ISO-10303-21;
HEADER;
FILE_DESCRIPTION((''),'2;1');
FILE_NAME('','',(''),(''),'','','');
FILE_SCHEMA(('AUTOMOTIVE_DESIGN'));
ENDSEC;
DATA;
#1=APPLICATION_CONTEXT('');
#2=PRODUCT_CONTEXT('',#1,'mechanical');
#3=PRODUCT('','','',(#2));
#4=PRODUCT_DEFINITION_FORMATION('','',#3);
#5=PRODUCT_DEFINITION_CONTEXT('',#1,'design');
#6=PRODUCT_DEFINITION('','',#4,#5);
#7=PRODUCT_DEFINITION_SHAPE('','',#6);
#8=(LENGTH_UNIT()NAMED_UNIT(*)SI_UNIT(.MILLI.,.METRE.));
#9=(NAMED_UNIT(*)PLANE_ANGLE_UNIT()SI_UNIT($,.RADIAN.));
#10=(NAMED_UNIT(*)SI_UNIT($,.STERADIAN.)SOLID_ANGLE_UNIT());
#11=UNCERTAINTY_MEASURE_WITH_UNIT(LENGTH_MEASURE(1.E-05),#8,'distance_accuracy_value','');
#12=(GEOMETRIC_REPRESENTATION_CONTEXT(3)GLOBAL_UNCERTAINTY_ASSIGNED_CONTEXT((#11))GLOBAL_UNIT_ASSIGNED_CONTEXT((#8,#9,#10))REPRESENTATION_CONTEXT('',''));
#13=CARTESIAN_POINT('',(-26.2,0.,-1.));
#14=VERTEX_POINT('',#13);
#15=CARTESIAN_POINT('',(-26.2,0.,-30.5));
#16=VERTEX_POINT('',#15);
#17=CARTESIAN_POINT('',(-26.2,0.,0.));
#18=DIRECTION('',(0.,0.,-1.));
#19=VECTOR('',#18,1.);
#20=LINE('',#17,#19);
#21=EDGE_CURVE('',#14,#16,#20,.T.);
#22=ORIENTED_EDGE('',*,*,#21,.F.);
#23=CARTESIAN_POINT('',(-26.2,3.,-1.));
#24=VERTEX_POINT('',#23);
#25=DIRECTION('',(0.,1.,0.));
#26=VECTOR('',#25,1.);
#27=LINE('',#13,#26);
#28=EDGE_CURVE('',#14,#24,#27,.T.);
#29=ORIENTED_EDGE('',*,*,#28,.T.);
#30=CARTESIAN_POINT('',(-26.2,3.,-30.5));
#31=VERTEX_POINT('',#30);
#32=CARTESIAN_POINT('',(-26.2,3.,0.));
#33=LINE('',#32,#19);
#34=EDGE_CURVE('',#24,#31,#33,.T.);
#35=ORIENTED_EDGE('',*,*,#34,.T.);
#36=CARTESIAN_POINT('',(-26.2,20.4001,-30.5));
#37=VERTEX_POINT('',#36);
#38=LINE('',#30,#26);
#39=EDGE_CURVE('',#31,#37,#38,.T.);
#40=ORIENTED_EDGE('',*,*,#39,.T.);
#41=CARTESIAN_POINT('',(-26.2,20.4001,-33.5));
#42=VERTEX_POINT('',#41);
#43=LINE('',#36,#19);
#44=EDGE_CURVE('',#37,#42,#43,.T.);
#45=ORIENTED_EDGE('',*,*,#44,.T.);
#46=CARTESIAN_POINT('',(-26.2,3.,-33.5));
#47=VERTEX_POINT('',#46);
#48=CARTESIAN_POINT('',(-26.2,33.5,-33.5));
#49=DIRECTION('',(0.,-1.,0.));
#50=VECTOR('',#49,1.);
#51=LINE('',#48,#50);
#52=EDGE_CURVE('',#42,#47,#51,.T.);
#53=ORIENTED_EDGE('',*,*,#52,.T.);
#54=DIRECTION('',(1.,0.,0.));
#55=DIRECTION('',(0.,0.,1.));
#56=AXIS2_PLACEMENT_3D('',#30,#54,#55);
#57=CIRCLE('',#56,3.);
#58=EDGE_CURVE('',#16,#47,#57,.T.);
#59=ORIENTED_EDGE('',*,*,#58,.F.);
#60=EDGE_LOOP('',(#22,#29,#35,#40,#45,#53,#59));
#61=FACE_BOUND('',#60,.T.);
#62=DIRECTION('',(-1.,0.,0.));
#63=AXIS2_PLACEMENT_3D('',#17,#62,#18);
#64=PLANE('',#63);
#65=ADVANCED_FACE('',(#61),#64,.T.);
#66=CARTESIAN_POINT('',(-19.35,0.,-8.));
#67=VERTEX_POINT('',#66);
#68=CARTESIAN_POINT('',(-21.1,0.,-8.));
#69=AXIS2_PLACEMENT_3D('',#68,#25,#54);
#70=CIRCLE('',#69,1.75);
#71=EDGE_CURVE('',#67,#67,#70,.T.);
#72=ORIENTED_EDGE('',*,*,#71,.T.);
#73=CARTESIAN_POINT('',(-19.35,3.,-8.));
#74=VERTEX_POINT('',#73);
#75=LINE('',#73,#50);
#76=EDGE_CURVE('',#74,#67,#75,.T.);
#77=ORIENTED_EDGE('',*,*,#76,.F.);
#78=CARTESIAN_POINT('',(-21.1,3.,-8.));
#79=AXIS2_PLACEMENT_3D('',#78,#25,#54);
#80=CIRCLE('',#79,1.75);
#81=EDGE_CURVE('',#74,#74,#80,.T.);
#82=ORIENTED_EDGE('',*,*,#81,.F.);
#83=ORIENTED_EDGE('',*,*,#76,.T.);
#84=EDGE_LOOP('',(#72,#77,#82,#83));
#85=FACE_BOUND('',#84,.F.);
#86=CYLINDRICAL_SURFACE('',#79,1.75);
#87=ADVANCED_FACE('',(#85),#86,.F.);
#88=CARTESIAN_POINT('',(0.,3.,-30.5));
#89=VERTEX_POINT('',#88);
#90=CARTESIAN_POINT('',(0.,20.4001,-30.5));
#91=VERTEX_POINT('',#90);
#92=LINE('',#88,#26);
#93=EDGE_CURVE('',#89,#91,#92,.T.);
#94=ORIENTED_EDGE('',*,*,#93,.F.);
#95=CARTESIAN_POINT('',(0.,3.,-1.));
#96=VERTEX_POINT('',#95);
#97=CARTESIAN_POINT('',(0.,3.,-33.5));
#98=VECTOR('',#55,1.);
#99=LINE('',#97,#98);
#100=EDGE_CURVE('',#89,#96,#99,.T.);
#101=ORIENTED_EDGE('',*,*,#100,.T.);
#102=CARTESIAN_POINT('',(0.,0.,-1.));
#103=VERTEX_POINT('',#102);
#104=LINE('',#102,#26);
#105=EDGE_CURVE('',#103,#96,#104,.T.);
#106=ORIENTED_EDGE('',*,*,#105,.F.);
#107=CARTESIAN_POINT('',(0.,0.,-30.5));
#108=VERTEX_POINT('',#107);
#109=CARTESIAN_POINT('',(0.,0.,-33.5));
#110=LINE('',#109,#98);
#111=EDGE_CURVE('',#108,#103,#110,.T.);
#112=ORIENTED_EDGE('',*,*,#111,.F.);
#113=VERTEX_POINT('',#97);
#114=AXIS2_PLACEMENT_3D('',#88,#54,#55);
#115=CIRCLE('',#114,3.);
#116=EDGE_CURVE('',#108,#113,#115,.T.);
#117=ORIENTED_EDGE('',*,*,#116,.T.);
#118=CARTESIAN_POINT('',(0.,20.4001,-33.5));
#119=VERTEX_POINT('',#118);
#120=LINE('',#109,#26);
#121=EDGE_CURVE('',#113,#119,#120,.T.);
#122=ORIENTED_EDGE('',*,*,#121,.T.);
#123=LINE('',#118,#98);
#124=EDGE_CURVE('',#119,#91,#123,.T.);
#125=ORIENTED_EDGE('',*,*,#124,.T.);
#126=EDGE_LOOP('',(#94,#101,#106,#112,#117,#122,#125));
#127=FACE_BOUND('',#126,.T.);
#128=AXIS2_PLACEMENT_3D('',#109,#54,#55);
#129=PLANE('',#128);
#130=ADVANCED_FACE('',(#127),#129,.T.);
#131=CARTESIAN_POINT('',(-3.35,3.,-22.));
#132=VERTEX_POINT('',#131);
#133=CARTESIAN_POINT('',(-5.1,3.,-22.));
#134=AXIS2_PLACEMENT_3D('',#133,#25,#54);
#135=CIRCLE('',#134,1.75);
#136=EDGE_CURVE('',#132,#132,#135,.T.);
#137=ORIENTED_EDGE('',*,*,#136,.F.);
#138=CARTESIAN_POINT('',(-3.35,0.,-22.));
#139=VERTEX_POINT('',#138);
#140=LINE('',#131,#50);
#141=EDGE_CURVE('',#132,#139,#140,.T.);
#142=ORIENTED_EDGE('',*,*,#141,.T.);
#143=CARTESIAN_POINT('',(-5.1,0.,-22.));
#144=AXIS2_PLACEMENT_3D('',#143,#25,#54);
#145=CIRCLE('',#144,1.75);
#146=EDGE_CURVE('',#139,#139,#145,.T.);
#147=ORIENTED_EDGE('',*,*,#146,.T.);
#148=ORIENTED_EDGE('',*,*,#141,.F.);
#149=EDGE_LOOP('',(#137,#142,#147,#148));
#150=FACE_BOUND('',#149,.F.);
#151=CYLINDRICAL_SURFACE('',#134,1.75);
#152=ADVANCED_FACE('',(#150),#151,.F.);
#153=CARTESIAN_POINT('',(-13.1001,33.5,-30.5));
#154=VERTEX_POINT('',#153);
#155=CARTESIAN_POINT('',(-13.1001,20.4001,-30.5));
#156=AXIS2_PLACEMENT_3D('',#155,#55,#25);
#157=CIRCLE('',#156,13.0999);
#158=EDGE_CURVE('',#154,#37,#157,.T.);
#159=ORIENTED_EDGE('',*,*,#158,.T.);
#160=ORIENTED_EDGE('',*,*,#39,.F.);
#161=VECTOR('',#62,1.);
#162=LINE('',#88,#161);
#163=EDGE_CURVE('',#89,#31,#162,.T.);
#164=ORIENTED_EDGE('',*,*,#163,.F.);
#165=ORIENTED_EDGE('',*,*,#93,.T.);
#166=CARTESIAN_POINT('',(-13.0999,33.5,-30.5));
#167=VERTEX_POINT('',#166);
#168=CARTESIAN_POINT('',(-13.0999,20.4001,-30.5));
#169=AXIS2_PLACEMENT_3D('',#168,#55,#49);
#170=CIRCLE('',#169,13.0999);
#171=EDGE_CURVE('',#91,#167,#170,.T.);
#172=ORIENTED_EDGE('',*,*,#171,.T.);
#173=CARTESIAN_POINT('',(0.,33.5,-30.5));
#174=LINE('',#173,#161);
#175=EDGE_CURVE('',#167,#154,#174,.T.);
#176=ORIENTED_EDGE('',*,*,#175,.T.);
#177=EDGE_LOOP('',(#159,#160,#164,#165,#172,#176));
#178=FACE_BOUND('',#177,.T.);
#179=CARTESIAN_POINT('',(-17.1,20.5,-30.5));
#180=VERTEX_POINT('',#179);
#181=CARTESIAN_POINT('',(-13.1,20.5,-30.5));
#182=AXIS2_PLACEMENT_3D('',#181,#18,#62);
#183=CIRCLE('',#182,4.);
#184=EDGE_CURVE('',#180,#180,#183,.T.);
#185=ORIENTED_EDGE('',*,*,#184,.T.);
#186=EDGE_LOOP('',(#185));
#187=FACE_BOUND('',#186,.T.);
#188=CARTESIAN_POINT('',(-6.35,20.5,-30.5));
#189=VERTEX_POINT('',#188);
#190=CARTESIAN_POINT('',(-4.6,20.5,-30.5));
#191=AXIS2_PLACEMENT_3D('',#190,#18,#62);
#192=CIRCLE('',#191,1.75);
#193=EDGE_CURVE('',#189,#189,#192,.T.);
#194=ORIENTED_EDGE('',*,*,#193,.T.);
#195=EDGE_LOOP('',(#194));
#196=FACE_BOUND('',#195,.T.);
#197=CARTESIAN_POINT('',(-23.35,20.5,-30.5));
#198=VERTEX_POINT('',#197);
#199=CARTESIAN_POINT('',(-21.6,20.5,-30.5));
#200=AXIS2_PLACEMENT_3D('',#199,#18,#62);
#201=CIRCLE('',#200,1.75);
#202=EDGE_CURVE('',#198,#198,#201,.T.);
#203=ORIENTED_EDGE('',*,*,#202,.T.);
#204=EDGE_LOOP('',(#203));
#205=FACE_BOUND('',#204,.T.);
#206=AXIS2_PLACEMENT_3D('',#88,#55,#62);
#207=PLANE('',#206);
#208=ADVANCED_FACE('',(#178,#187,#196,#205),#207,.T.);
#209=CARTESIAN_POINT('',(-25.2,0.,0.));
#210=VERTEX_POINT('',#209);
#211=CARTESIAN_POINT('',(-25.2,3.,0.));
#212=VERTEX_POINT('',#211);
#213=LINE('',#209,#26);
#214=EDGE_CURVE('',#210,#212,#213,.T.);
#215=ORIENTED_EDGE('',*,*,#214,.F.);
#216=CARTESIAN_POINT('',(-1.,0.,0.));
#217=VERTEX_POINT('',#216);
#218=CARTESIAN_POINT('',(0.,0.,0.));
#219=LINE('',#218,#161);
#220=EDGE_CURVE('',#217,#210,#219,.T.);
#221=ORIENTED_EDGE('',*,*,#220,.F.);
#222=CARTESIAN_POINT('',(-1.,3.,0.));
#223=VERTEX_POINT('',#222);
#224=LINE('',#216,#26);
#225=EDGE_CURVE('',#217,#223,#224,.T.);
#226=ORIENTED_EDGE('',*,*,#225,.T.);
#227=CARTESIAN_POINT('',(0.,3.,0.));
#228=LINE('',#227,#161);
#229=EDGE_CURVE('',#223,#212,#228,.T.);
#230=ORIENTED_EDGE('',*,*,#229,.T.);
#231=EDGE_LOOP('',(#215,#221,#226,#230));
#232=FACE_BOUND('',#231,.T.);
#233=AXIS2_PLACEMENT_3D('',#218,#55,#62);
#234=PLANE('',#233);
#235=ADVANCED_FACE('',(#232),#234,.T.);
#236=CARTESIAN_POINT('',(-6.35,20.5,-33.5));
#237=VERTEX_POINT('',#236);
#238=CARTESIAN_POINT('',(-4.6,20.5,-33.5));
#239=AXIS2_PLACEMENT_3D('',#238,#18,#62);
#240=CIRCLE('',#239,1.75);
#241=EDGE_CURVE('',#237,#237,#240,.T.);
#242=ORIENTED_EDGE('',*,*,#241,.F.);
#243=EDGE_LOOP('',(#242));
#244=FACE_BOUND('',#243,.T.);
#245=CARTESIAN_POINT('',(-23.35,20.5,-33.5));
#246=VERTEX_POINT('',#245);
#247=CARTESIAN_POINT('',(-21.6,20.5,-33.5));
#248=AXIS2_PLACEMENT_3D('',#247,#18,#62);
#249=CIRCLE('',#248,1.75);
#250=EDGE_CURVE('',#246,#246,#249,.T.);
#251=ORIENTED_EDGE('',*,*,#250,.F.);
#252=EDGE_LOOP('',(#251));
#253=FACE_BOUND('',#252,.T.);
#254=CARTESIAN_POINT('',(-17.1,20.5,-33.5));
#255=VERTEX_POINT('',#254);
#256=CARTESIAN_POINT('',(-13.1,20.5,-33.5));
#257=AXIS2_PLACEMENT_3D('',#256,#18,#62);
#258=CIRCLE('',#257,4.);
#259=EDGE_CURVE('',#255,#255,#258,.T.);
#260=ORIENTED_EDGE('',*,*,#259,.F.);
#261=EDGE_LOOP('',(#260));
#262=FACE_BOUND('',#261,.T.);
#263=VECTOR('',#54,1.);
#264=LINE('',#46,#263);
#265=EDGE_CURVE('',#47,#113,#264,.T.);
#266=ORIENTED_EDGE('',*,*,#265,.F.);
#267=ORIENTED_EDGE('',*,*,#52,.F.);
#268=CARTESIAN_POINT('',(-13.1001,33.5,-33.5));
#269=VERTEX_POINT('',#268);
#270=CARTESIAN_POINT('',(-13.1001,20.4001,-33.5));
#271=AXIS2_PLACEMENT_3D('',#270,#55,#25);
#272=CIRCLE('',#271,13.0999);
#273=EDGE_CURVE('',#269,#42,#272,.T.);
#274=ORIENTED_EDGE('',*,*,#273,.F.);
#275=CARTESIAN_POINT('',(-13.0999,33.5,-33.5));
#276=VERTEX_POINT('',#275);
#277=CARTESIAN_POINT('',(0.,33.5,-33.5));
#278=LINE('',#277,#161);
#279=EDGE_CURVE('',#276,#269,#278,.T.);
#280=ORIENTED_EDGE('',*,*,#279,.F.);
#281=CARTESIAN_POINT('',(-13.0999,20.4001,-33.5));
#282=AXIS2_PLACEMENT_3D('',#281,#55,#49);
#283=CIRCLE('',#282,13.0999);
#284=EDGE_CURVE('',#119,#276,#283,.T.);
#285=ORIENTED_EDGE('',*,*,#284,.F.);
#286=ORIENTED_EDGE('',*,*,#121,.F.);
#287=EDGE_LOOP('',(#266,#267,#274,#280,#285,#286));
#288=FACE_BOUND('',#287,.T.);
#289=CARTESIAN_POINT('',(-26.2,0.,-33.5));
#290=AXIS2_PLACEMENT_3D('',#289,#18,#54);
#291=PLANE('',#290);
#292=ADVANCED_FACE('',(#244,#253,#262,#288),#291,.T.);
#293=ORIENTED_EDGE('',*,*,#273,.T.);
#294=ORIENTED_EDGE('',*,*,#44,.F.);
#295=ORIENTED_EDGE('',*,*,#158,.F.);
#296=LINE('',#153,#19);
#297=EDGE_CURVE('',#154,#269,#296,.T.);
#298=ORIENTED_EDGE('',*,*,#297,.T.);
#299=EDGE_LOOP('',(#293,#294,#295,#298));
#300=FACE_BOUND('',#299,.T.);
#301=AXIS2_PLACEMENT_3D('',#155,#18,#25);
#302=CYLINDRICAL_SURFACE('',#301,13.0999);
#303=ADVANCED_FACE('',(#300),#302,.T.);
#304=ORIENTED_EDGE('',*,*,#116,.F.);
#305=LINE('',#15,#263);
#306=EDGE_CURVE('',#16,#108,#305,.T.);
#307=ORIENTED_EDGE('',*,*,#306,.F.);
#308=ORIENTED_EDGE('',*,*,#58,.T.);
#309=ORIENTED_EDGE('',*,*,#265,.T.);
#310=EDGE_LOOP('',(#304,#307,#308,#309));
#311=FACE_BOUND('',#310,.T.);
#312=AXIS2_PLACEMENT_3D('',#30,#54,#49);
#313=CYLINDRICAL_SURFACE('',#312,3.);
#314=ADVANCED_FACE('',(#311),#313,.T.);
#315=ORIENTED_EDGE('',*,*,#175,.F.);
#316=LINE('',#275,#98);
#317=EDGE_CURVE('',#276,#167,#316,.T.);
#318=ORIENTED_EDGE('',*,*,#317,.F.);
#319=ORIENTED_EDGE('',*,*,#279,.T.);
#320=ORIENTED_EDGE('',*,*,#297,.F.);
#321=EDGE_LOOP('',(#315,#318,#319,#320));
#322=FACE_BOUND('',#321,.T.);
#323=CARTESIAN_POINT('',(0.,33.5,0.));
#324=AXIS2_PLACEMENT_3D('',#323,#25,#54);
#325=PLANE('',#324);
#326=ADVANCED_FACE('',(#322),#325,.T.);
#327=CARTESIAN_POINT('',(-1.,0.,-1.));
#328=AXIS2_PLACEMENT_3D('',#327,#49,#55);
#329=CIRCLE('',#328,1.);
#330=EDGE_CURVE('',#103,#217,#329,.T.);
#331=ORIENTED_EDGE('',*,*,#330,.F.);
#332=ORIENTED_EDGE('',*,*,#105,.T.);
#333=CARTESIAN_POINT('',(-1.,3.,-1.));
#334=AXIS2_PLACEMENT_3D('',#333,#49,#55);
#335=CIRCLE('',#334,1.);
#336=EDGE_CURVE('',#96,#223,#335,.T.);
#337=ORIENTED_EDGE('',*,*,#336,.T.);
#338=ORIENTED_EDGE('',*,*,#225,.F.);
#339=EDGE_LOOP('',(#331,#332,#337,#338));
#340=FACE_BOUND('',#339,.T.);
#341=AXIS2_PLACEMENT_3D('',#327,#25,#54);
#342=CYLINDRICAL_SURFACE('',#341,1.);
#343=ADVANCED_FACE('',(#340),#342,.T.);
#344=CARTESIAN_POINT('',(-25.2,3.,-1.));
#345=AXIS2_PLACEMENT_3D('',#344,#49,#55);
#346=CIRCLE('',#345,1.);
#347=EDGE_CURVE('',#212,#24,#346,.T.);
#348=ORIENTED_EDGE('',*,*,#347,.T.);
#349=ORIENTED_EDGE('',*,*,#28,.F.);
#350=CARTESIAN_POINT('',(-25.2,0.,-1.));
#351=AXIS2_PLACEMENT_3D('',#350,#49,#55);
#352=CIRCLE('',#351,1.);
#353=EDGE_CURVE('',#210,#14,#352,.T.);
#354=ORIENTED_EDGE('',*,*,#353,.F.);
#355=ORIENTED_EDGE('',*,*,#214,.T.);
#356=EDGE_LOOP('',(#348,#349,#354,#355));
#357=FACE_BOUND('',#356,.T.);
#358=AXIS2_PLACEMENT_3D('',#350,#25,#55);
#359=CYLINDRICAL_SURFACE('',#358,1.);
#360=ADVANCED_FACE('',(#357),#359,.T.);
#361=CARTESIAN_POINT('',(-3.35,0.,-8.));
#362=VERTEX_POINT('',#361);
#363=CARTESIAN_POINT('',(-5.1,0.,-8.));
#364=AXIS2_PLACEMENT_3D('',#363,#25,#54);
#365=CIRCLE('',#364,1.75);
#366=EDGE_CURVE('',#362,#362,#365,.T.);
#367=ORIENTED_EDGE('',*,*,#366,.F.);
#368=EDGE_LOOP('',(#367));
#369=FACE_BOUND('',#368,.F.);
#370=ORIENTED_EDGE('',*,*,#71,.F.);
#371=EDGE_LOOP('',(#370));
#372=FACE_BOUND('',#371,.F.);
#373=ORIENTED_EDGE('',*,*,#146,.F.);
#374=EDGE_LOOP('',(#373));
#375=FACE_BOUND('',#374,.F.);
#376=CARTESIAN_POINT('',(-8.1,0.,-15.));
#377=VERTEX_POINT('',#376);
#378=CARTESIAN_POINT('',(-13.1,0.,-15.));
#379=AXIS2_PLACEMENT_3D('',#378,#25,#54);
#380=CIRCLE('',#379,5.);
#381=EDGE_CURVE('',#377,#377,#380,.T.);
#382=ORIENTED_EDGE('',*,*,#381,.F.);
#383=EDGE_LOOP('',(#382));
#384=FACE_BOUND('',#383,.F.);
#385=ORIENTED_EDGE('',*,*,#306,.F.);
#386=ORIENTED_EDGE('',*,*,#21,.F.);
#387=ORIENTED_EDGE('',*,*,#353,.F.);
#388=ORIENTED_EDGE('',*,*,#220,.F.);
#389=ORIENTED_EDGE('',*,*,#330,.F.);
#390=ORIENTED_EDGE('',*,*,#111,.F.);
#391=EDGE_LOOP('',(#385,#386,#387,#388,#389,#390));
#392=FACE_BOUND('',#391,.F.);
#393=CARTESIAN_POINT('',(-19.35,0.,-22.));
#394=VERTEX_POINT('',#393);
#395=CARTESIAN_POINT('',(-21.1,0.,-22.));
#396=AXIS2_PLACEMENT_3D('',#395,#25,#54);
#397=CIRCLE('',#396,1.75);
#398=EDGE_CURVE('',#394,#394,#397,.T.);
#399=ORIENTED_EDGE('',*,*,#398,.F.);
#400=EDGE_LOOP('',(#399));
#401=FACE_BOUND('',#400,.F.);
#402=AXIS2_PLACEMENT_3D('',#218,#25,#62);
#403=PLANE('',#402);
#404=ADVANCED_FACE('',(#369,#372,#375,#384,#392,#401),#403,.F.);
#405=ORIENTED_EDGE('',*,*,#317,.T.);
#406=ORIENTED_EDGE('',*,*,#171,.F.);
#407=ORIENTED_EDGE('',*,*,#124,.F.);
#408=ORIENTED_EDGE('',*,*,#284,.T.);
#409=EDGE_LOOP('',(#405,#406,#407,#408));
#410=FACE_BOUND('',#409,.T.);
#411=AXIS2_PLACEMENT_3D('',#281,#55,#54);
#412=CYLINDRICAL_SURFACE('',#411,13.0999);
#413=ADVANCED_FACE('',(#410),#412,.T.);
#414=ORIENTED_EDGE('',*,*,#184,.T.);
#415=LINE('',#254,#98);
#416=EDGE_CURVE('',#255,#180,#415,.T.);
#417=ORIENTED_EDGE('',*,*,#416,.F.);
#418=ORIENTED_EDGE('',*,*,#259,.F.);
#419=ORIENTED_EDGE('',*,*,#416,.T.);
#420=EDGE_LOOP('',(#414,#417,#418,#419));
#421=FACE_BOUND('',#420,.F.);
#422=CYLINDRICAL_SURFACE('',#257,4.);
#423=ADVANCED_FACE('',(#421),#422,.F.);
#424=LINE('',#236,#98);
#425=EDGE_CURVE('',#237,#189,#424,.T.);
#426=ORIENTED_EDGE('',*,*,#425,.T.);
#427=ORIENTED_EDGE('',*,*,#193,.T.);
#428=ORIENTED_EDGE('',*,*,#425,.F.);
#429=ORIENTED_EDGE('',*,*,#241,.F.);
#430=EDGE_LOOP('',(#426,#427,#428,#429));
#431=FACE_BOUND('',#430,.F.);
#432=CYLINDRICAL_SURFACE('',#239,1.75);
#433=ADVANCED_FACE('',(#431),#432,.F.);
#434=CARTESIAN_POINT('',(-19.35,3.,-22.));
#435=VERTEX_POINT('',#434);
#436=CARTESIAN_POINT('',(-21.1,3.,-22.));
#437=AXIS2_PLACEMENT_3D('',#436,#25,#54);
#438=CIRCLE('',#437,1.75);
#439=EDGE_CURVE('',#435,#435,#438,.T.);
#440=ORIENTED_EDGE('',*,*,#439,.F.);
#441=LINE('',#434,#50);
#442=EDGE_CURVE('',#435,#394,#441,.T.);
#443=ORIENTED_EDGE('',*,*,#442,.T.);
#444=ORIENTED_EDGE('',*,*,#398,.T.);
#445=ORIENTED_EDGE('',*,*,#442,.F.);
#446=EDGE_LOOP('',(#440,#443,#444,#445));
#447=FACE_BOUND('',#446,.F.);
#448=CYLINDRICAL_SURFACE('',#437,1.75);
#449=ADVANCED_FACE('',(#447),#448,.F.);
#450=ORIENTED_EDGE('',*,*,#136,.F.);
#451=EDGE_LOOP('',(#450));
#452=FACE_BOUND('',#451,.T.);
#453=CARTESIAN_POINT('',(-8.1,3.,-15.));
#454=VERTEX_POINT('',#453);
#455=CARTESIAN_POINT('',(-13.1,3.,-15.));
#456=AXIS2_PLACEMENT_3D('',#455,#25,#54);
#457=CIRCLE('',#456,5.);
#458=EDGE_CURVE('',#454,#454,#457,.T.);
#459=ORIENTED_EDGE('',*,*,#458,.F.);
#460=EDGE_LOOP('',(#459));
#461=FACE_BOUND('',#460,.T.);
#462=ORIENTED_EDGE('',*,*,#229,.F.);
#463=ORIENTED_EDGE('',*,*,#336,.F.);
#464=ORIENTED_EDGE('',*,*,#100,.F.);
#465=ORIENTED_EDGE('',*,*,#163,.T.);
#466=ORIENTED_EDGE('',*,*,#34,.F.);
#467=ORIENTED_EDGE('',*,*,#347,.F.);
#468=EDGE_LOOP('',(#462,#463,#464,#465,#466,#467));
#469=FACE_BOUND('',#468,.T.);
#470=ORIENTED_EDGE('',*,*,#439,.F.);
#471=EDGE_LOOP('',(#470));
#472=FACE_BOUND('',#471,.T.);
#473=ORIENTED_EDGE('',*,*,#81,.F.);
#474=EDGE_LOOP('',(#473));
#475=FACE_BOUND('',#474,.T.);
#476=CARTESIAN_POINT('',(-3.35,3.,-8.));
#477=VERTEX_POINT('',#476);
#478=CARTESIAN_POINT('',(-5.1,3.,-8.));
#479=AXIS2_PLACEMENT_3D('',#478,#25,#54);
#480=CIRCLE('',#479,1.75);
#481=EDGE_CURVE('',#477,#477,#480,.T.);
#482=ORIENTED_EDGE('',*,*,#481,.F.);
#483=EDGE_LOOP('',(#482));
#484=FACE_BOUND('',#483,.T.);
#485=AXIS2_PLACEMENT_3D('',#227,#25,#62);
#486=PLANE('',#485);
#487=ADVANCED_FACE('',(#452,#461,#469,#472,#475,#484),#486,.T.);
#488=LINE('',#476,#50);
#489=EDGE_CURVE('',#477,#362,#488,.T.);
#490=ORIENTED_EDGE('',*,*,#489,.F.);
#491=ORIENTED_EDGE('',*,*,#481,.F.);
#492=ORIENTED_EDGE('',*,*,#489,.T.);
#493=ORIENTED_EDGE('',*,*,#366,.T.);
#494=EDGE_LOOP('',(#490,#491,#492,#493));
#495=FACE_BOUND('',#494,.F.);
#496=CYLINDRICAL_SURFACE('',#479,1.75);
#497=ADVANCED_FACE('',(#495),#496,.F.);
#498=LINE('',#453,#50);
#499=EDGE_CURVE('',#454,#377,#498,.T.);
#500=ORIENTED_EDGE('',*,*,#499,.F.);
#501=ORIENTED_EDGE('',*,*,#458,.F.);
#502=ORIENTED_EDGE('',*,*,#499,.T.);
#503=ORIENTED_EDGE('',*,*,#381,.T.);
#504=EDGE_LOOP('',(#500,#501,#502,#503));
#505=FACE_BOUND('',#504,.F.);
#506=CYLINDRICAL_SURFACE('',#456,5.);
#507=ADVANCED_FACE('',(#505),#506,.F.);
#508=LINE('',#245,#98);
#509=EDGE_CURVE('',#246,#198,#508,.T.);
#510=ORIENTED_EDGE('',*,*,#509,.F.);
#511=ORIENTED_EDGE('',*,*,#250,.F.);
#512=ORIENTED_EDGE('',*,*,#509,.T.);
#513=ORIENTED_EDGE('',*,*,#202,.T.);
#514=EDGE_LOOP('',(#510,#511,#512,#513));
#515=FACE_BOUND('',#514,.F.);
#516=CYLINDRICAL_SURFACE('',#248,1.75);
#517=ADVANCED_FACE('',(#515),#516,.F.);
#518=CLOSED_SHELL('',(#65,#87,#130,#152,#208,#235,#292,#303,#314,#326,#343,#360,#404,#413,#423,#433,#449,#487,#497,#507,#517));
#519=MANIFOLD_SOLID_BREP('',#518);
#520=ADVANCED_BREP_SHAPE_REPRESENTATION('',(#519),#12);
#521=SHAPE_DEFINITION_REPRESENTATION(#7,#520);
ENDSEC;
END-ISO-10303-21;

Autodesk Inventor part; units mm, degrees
ref_plane "YZ Plane" through (0, 0, 0) normal (1, 0, 0) x (0, 1, 0)
ref_plane "XZ Plane" through (0, 0, 0) normal (0, 1, 0) x (-1, 0, 0)
ref_plane "XY Plane" through (0, 0, 0) normal (0, 0, 1) x (1, 0, 0)
sketch "Sketch1" plane through (0, 0, 0) normal (0, 1, 0) x (-1, 0, 0)
  line L0 (0, 0) -> (26.2, 0)
  line L1 (26.2, 0) -> (26.2, -33.5)
  line L2 (26.2, -33.5) -> (0, -33.5)
  line L3 (0, -33.5) -> (0, 0)
  dimension "d0" = 26.2
  dimension "d1" = 33.5
extrude "Extrusion1" add sketch "Sketch1" along normal blind 3
sketch "Sketch2" plane through (0, 3, 0) normal (0, 1, 0) x (1, 0, 0)
  line L0 (0, 33.5) -> (-26.2, 33.5) projected
  line L1 (-26.2, 33.5) -> (0, 33.5)
  line L2 (0, 33.5) -> (0, 30.5)
  line L3 (0, 30.5) -> (-26.2, 30.5)
  line L4 (-26.2, 30.5) -> (-26.2, 33.5)
  point P0 (0, 0)
  dimension "d4" = 26.2
  dimension "d5" = 3
extrude "Extrusion2" add sketch "Sketch2" along normal blind 30.5
fillet "Fillet1" radius 3 1 edges at (-13.1, 0, -33.5)
fillet "Fillet2" radius 13.1 2 edges at (0, 33.5, -32) (-26.2, 33.5, -32)
fillet "Fillet3" radius 1 2 edges at (-26.2, 1.5, 0) (0, 1.5, 0)
sketch "Sketch3" plane through (0, 3, 0) normal (0, 1, 0) x (1, 0, 0)
  circle A0 centre (-13.1, 15) radius 5
  line L0 (0, 1) -> (0, 30.5) projected
  line L1 (-25.2, 0) -> (-1, 0) projected
  circle A1 centre (-21.1, 8) radius 1.75
  line L2 (-26.2, 30.5) -> (-26.2, 1) projected
  circle A2 centre (-5.1, 8) radius 1.75
  circle A3 centre (-21.1, 22) radius 1.75
  circle A4 centre (-5.1, 22) radius 1.75
  point P0 (0, 0)
  dimension "d11" = 10
  dimension "d12" = 13.1
  dimension "d13" = 15
  dimension "d14" = 3.5
  dimension "d15" = 7
  dimension "d16" = 5.1
  dimension "d19" = 16
  dimension "d22" = 14
extrude "Extrusion3" cut sketch "Sketch3" against normal through all
sketch "Sketch4" plane through (0, 3, -33.5) normal (0, 0, -1) x (-1, 0, 0)
  circle A0 centre (13.1, 17.5) radius 4
  arc A1 (26.2, 17.4) -> (0, 17.4) centre (13.1, 17.4) ccw projected
  line L0 (0, 0) -> (0, 17.4) projected
  circle A2 centre (4.6, 17.5) radius 1.75
  circle A3 centre (21.6, 17.5) radius 1.75
  point P0 (0, -3)
  point P1 (13.1, 30.5)
  dimension "d27" = 8
  dimension "d28" = 13
  dimension "d32" = 13.1
  dimension "d33" = 3.5
  dimension "d34" = 4.6
  dimension "d35" = 3.5
  dimension "d36" = 17
extrude "Extrusion4" cut sketch "Sketch4" against normal through all
properties part number "suporte"
